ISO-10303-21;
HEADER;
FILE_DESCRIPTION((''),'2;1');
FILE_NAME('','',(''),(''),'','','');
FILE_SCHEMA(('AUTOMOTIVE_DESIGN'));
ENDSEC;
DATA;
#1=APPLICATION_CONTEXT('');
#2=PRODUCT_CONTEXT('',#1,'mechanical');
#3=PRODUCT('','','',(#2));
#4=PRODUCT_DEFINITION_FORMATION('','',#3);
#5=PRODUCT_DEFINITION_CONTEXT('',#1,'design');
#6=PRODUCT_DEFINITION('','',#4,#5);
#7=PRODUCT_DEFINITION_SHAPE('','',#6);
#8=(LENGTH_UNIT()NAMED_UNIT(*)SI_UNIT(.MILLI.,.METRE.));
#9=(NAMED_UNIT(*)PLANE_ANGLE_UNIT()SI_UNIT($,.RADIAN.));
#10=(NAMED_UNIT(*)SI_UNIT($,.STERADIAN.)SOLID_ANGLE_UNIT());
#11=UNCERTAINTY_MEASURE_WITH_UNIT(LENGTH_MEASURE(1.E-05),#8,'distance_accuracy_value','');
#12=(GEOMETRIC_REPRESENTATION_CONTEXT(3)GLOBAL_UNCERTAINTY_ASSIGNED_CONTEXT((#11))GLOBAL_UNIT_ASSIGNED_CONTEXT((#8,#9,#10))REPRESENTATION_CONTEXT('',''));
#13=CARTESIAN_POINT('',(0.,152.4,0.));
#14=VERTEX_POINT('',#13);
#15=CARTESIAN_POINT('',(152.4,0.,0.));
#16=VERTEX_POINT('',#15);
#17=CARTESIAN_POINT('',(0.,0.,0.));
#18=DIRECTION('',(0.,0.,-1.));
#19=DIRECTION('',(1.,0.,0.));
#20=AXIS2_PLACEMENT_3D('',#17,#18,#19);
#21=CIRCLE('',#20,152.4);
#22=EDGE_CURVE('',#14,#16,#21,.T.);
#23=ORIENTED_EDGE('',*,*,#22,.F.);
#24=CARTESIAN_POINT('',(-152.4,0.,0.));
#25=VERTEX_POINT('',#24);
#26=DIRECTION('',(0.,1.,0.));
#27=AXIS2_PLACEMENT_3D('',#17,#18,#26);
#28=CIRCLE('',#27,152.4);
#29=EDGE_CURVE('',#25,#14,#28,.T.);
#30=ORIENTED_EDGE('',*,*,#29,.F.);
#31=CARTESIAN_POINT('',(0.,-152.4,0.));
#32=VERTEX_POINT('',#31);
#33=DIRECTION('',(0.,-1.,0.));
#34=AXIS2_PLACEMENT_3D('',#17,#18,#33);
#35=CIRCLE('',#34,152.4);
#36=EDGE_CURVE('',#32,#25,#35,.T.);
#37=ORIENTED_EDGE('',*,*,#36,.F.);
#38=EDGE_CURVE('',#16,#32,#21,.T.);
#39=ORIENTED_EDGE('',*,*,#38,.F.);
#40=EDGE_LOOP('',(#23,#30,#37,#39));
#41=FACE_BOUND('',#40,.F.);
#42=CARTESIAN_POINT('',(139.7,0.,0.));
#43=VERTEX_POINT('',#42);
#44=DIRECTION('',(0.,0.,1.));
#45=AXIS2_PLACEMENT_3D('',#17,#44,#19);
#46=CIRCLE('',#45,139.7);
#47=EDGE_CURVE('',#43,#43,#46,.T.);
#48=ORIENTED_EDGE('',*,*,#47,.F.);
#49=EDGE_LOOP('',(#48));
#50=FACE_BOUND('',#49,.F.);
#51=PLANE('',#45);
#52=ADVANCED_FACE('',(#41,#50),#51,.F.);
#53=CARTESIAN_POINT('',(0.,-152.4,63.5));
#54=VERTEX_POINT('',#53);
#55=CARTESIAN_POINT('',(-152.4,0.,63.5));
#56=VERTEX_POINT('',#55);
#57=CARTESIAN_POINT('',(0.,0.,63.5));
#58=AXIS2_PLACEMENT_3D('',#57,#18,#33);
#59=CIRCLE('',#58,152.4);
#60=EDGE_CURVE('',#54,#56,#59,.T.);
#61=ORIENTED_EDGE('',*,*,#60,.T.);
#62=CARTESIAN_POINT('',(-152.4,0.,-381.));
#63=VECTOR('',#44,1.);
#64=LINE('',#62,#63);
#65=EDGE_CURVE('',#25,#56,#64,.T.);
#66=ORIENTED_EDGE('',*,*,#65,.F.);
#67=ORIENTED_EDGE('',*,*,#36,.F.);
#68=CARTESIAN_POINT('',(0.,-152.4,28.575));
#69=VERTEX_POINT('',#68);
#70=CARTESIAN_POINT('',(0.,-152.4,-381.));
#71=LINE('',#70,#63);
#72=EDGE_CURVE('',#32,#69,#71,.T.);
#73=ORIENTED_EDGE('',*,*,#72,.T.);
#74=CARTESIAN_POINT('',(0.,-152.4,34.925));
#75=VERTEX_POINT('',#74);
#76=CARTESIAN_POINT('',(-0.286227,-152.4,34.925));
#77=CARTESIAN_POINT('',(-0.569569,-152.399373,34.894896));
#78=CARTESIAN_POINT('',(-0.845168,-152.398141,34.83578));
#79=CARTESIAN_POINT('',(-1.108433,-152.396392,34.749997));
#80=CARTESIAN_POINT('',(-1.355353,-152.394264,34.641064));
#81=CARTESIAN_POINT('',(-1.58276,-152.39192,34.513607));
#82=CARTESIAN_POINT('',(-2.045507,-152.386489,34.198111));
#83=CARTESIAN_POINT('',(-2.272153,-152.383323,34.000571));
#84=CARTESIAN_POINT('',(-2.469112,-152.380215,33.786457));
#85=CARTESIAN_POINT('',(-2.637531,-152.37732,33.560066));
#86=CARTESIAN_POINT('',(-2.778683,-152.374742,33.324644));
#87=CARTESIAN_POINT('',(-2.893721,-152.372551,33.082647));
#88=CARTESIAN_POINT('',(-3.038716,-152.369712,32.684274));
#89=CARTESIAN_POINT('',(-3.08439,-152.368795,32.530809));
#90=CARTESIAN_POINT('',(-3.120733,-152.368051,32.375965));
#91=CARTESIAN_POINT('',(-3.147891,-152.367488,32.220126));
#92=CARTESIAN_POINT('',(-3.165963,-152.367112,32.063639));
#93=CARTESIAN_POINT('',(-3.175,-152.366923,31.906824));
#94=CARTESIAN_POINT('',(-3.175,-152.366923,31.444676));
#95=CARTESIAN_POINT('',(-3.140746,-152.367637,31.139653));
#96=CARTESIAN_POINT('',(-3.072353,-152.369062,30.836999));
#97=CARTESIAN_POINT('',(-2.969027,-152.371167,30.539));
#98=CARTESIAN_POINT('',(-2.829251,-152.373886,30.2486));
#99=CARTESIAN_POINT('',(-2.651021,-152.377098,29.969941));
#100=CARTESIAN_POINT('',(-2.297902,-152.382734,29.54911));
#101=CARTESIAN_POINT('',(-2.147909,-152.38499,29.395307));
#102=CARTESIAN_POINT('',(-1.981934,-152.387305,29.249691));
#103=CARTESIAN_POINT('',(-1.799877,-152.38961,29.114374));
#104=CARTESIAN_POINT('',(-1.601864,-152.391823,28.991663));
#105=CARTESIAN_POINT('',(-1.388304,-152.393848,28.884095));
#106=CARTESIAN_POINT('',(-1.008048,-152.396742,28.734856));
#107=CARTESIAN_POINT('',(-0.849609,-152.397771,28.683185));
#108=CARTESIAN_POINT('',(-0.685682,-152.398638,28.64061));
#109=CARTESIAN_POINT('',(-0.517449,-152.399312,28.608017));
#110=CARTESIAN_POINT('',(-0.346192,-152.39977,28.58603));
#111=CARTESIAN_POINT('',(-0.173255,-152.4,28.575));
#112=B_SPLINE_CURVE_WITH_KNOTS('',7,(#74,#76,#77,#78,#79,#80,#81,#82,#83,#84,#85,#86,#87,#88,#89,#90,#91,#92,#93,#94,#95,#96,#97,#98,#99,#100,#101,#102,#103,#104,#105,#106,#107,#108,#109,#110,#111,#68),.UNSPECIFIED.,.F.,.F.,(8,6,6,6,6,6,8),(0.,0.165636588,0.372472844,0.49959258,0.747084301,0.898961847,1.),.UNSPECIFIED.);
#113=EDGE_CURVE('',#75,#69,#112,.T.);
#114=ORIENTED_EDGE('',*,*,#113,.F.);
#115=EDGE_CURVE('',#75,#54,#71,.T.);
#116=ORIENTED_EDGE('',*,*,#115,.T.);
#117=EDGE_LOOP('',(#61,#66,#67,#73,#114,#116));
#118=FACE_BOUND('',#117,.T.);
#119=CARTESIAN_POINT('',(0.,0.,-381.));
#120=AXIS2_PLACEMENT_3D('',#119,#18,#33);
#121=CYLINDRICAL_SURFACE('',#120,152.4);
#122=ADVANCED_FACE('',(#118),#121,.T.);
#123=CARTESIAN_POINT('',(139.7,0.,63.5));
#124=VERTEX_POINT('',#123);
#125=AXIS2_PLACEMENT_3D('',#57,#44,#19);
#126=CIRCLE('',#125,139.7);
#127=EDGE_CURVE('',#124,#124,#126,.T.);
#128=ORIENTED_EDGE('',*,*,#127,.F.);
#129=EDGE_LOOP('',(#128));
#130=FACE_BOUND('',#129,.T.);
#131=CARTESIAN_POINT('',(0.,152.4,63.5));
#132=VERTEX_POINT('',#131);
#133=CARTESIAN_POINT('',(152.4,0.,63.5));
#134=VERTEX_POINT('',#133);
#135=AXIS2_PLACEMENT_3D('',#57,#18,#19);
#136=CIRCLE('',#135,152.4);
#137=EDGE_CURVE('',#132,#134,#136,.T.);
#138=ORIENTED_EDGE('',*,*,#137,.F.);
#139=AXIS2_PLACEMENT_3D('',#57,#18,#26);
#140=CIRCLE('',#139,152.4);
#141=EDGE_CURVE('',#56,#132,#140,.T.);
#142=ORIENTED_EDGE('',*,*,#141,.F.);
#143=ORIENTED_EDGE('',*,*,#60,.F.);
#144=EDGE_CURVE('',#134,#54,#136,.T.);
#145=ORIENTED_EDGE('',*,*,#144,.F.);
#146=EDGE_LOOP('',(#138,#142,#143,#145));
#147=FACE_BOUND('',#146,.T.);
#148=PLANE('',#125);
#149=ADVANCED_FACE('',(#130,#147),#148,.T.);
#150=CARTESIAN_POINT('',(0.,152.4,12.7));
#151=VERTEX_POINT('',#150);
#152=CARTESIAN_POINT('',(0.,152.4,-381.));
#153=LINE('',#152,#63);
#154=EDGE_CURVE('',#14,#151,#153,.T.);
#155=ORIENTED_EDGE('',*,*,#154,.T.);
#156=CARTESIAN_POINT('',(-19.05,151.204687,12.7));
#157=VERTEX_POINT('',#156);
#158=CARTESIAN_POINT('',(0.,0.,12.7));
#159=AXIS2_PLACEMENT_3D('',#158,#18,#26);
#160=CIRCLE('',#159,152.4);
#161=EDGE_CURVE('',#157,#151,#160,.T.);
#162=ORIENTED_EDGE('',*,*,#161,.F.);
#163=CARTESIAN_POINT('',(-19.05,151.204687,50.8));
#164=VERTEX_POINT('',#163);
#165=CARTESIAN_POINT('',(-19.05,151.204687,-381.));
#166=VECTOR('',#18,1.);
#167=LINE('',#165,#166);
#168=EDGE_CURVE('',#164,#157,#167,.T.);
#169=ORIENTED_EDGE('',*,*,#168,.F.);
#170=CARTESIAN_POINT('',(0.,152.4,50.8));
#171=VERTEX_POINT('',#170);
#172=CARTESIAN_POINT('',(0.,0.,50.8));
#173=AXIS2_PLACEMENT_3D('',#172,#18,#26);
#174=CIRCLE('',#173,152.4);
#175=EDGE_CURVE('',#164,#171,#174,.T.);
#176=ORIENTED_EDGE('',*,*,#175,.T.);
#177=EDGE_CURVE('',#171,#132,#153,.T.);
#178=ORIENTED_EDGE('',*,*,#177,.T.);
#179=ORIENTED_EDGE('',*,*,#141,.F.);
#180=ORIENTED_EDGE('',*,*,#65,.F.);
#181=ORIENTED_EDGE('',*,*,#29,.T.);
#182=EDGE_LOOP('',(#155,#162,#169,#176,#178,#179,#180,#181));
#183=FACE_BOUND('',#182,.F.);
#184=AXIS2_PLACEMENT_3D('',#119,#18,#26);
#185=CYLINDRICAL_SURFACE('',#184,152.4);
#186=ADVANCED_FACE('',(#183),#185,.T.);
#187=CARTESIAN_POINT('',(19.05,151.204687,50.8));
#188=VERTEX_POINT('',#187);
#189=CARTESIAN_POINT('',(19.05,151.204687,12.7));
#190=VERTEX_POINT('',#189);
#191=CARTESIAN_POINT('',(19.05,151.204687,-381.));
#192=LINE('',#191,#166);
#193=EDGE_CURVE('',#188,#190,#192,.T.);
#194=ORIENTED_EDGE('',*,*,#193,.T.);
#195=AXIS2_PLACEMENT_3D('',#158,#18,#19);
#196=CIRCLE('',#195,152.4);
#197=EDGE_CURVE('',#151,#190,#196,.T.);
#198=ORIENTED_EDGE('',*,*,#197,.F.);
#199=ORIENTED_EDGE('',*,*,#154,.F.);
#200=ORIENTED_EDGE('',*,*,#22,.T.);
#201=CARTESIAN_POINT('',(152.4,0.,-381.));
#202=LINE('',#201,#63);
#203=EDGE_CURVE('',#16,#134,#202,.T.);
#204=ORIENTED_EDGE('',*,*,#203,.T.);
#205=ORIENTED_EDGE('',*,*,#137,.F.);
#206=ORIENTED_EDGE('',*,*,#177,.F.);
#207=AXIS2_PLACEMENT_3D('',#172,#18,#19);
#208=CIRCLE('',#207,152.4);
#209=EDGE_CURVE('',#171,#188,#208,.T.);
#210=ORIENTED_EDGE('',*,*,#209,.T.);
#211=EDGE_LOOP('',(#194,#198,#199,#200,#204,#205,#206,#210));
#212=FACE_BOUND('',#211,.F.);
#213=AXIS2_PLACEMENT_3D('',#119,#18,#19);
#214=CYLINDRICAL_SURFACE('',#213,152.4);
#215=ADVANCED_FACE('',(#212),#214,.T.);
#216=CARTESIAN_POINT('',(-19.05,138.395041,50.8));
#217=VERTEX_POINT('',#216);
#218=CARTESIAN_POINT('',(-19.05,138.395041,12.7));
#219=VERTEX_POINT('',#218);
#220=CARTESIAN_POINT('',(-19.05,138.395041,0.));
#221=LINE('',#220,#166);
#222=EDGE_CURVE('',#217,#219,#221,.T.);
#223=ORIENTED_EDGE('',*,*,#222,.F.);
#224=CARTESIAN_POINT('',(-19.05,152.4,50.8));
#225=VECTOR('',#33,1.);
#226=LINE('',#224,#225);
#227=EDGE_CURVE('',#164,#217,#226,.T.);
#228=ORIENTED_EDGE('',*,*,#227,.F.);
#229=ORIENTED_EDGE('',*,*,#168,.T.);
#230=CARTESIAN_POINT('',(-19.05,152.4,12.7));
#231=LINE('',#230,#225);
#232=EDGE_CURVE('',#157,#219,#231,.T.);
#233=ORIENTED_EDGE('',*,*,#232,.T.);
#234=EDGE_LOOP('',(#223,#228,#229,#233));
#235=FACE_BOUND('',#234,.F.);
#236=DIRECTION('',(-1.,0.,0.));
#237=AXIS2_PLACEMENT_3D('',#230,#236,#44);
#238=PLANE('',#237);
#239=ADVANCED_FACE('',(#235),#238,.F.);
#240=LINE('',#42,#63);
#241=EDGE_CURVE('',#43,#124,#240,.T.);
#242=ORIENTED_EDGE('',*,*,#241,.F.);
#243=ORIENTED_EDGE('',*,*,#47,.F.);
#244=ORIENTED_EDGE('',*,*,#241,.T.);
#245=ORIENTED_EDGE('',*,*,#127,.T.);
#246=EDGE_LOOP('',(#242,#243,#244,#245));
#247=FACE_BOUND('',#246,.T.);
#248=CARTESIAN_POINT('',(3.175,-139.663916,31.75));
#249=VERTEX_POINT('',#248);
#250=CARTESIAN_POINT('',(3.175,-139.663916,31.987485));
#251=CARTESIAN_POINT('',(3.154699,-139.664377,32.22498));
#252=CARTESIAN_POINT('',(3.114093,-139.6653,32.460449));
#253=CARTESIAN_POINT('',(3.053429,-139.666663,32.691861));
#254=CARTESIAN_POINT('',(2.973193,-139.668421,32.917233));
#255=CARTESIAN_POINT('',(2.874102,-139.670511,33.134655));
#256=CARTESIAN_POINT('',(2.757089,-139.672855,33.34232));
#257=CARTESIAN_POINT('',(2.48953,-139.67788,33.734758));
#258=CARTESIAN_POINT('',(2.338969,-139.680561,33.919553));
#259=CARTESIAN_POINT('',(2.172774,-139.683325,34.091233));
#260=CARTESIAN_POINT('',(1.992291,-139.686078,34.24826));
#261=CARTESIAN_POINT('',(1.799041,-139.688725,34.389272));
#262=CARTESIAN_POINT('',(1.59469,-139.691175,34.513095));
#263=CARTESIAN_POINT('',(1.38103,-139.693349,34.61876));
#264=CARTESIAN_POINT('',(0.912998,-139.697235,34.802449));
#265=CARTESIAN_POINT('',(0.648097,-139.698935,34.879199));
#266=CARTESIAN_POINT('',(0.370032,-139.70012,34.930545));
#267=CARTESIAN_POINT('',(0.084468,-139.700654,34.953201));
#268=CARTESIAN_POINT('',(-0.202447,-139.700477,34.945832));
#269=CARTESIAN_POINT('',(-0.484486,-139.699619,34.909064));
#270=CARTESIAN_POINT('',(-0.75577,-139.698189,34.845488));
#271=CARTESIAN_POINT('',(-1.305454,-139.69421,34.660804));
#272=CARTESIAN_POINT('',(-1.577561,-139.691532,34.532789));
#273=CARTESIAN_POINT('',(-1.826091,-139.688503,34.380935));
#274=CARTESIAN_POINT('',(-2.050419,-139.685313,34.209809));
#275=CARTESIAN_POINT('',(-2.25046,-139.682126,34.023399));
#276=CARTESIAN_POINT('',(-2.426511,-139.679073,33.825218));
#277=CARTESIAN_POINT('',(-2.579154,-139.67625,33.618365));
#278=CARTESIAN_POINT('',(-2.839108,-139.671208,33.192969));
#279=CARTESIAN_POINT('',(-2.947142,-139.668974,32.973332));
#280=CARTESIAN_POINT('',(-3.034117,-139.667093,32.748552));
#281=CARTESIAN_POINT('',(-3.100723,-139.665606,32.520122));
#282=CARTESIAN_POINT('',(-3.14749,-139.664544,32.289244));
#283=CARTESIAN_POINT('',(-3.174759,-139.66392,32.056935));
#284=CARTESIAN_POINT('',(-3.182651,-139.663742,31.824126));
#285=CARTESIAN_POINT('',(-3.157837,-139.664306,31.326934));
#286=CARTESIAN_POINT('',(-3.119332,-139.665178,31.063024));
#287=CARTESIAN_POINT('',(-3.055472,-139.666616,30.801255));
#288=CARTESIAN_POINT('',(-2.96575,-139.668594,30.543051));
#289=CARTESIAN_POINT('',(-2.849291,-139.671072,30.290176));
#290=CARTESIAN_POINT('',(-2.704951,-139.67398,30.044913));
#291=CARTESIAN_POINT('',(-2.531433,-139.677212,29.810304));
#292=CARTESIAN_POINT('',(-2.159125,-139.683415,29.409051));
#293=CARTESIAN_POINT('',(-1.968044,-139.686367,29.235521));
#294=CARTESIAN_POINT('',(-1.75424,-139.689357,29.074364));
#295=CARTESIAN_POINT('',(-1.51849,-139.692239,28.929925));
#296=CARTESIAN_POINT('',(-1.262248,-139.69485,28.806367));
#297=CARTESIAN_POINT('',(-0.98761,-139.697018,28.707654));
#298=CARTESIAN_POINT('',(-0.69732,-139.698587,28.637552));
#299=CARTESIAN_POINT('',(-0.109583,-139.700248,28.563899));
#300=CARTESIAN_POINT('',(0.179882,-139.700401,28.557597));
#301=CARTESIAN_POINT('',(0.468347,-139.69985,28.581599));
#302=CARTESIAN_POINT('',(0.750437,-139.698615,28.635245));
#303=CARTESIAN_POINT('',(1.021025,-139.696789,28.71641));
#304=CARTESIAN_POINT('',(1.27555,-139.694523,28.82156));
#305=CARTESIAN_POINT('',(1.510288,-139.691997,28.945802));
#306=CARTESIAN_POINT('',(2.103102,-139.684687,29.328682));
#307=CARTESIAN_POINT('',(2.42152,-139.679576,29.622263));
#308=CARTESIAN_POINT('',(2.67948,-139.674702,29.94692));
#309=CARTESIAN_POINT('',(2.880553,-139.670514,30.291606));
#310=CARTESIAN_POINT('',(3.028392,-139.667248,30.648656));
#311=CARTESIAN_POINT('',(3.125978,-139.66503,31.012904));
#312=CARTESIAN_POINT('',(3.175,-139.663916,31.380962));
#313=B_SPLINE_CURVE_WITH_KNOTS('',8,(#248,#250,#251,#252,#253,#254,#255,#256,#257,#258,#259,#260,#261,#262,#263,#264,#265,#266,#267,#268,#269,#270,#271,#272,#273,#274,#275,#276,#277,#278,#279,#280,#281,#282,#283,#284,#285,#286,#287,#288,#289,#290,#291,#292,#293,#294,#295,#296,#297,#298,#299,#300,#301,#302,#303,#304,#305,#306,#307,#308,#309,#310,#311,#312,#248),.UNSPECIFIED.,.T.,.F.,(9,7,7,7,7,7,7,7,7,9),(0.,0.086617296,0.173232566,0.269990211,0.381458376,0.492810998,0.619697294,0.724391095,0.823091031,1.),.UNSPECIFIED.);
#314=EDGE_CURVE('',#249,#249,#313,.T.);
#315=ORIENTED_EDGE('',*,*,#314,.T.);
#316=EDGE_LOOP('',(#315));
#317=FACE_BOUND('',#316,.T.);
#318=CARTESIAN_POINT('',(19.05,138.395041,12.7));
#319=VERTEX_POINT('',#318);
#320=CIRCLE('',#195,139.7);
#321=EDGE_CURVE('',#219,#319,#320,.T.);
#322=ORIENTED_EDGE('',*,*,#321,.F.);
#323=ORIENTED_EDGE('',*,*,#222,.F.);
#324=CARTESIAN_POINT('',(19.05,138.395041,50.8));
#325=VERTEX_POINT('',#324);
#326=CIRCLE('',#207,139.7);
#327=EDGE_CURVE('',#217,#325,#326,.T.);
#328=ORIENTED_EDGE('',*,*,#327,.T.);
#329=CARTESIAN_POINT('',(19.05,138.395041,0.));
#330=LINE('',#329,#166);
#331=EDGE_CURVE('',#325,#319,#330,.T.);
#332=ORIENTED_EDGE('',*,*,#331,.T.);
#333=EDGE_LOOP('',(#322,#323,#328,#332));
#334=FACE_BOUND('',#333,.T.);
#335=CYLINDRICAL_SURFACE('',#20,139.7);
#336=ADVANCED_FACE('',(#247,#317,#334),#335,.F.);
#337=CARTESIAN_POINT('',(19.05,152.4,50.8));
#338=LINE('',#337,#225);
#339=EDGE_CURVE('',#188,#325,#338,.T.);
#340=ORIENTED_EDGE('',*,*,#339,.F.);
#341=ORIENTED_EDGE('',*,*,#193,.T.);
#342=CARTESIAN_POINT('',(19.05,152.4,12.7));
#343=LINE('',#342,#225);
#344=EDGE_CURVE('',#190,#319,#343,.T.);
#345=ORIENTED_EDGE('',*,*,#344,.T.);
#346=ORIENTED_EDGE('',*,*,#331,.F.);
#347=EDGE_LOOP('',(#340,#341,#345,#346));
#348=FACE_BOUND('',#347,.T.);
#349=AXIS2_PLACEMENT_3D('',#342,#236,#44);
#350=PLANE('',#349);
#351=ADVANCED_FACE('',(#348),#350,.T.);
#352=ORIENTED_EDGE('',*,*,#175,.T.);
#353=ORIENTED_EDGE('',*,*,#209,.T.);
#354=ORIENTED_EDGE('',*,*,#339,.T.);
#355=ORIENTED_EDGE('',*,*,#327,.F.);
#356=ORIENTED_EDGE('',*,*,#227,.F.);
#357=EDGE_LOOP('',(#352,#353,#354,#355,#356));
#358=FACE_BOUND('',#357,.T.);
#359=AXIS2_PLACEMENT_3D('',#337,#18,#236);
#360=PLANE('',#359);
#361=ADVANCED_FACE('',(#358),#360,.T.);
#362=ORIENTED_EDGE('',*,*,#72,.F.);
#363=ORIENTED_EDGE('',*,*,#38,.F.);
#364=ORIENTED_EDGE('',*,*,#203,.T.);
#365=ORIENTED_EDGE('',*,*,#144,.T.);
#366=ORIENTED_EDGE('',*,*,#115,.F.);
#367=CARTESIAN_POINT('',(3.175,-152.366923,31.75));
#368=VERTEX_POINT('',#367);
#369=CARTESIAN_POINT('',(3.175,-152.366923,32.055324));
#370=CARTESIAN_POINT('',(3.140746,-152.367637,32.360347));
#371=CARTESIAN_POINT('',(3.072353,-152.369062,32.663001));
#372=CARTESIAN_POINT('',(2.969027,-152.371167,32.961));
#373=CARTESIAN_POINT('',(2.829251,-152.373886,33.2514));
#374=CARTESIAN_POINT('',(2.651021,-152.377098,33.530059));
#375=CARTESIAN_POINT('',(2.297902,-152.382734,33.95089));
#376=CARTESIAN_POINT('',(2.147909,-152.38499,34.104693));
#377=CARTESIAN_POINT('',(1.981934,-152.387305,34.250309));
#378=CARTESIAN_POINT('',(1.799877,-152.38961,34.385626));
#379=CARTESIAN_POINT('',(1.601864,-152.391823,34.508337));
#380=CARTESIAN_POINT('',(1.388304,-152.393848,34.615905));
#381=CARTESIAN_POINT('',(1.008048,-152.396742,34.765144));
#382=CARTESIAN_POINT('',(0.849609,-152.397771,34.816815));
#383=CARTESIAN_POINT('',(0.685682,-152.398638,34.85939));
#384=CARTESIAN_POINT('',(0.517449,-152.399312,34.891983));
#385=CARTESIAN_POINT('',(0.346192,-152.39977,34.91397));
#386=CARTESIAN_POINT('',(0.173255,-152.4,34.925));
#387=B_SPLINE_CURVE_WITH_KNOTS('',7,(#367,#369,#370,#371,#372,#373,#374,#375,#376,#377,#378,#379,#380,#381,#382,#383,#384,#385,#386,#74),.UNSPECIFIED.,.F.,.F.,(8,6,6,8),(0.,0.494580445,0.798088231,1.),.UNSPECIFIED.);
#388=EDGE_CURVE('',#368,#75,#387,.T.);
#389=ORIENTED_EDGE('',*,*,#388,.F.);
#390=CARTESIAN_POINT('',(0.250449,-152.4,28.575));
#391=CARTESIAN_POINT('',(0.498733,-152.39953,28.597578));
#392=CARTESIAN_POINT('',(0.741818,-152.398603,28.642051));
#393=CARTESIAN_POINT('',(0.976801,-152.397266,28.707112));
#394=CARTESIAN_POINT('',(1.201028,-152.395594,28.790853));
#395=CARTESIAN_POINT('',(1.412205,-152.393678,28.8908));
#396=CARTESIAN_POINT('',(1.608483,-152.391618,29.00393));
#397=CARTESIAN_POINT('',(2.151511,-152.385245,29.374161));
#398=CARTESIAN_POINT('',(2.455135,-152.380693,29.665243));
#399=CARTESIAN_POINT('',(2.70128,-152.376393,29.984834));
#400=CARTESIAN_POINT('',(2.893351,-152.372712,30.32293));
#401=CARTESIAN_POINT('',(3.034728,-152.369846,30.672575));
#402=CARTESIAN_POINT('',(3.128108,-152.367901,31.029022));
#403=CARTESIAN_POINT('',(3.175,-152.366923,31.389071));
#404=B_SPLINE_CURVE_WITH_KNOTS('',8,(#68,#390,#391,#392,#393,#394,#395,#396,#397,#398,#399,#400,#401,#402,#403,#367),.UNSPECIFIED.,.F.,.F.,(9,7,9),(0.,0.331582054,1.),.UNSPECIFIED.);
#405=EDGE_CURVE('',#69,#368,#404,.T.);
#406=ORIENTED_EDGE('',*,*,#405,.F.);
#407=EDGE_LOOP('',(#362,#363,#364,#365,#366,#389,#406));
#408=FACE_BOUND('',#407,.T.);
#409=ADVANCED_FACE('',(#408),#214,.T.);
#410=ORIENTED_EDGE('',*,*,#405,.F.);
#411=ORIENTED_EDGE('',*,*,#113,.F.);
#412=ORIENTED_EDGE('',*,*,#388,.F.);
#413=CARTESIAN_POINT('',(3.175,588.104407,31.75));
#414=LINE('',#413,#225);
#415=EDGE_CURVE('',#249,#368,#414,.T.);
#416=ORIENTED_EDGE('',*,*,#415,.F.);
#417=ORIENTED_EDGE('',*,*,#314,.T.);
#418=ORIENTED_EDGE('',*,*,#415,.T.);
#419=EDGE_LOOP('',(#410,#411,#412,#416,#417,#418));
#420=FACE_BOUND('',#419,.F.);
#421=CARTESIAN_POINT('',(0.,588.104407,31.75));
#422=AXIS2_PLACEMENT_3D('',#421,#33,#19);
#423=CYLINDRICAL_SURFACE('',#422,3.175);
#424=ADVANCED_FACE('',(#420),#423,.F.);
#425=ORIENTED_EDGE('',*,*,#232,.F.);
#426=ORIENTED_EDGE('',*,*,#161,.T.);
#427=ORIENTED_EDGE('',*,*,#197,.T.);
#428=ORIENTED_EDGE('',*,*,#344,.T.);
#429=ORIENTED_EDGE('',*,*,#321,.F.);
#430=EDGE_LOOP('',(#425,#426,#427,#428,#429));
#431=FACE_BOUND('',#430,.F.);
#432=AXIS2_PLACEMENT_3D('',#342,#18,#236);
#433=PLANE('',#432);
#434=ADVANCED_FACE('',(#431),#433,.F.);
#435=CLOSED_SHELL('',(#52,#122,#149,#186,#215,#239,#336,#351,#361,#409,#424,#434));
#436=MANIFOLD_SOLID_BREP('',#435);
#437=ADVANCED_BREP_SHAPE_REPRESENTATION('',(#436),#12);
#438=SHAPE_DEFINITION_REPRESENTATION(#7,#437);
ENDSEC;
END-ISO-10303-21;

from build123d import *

# Parameters (mm, degrees)
F0_W        = 304.8
F0_H        = 304.8
F0_R        = 139.7
F1_DEPTH    = 63.5
F3_D        = 6.35
F2_W        = 38.1
F2_H        = 38.1
F2_R        = 1.5875
F4_DEPTH    = 25.4
F5_T1_DEPTH = 825.5


# Not quite as in the source:
# - a fillet or chamfer that OpenCascade refuses, or shapes differently, is made with other operations: its cross-section is extruded or revolved along the edge and cut away or added


with BuildPart() as f1:
    # F0 (on Top) → F1 (new body)
    with BuildSketch(Plane.XY):
        Rectangle(F0_W, F0_H)
        Circle(F0_R, mode=Mode.SUBTRACT)
    extrude(amount=F1_DEPTH)

    # F3 (through all)
    with Locations(Plane(origin=(0, 152.4, 0), x_dir=(-1, 0, 0), z_dir=(0, 1, 0))):
        with Locations((0, 31.75)):
            Hole(F3_D / 2)

    # F2 (on face) → F4 (cut)
    with BuildSketch(Plane(origin=(0, 152.4, 0), x_dir=(-1, 0, 0), z_dir=(0, 1, 0))):
        with Locations((0, 31.75)):
            Rectangle(F2_W, F2_H)
        with Locations((0, 31.75)):
            Circle(F2_R, mode=Mode.SUBTRACT)
    extrude(amount=-F4_DEPTH, mode=Mode.SUBTRACT)

    # F5: fillet of radius 152.4 on 4 edges, made by hand

    # F5_s2 → F5_t1 (cut)
    with BuildSketch(Plane.XY.offset(-381)):
        with BuildLine():
            ThreePointArc((0, 152.4), (-107.7630734528, 107.7630734528), (-152.4, 0))
            Line((-152.4, 0), (-152.4, 152.4))
            Line((-152.4, 152.4), (0, 152.4))
        make_face()
        with BuildLine():
            ThreePointArc((152.4, 0), (107.7630734528, 107.7630734528), (0, 152.4))
            Line((0, 152.4), (152.4, 152.4))
            Line((152.4, 152.4), (152.4, 0))
        make_face()
        with BuildLine():
            ThreePointArc((152.4, 0), (107.7630734528, -107.7630734528), (0, -152.4))
            Line((0, -152.4), (152.4, -152.4))
            Line((152.4, -152.4), (152.4, 0))
        make_face()
        with BuildLine():
            ThreePointArc((0, -152.4), (-107.7630734528, -107.7630734528), (-152.4, 0))
            Line((-152.4, 0), (-152.4, -152.4))
            Line((-152.4, -152.4), (0, -152.4))
        make_face()
    extrude(amount=F5_T1_DEPTH, mode=Mode.SUBTRACT)


solid = f1.part
